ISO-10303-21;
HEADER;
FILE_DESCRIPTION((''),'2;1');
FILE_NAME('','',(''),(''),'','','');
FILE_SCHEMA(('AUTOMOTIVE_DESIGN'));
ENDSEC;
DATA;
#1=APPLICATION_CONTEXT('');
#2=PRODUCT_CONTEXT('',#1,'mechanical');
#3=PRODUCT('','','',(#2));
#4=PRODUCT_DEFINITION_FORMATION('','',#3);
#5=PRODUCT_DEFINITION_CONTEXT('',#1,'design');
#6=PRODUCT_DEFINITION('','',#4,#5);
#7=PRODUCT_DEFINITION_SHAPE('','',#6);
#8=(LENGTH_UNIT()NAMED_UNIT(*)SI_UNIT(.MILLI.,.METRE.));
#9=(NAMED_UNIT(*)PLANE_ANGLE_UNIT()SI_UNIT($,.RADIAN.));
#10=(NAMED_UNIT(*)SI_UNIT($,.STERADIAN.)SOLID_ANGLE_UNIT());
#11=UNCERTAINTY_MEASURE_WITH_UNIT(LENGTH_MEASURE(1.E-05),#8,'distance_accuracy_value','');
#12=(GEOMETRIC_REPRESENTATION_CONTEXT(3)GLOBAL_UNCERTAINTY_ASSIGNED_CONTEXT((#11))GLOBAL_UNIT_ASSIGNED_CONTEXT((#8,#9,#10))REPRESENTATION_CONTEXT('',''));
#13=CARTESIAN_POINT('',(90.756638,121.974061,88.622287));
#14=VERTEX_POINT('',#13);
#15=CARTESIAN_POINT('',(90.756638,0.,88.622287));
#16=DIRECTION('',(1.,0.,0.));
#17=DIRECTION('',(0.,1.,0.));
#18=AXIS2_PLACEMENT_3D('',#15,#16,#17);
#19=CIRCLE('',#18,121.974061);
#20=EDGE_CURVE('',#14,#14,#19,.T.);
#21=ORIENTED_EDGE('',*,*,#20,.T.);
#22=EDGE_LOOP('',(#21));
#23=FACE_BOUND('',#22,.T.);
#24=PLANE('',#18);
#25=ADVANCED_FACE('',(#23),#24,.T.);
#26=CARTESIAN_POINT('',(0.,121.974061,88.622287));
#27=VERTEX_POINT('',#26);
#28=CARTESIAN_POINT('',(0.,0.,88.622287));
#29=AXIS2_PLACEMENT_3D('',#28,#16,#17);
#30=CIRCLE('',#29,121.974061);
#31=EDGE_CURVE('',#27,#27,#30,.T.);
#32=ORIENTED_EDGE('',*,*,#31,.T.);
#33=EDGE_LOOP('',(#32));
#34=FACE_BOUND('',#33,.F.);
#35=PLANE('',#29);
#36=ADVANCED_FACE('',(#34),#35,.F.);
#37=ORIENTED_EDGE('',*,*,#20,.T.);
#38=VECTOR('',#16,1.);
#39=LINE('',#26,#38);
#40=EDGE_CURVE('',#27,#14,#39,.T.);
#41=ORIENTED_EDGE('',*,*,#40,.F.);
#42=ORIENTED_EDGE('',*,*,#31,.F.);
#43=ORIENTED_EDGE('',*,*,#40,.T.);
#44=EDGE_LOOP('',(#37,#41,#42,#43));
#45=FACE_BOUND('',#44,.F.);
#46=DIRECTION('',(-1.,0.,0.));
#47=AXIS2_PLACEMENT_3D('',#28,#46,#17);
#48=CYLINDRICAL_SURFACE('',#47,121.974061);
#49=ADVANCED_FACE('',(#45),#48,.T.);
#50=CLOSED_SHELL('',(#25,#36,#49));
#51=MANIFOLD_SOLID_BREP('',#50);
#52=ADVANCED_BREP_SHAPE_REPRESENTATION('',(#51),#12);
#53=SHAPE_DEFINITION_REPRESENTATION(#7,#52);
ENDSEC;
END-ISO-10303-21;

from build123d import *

# Parameters (mm, degrees)
F0_R     = 121.9740608537
F1_DEPTH = 90.7566379756


# Not quite as in the source:
# - the program builds the solid bodies; features that only make, move or delete a surface that nothing else refers to are left out


with BuildPart() as f1:
    # F0 (on Right) → F1 (new body)
    with BuildSketch(Plane.YZ):
        with Locations((0, 88.6222869158)):
            Circle(F0_R)
    extrude(amount=F1_DEPTH)


solid = f1.part
